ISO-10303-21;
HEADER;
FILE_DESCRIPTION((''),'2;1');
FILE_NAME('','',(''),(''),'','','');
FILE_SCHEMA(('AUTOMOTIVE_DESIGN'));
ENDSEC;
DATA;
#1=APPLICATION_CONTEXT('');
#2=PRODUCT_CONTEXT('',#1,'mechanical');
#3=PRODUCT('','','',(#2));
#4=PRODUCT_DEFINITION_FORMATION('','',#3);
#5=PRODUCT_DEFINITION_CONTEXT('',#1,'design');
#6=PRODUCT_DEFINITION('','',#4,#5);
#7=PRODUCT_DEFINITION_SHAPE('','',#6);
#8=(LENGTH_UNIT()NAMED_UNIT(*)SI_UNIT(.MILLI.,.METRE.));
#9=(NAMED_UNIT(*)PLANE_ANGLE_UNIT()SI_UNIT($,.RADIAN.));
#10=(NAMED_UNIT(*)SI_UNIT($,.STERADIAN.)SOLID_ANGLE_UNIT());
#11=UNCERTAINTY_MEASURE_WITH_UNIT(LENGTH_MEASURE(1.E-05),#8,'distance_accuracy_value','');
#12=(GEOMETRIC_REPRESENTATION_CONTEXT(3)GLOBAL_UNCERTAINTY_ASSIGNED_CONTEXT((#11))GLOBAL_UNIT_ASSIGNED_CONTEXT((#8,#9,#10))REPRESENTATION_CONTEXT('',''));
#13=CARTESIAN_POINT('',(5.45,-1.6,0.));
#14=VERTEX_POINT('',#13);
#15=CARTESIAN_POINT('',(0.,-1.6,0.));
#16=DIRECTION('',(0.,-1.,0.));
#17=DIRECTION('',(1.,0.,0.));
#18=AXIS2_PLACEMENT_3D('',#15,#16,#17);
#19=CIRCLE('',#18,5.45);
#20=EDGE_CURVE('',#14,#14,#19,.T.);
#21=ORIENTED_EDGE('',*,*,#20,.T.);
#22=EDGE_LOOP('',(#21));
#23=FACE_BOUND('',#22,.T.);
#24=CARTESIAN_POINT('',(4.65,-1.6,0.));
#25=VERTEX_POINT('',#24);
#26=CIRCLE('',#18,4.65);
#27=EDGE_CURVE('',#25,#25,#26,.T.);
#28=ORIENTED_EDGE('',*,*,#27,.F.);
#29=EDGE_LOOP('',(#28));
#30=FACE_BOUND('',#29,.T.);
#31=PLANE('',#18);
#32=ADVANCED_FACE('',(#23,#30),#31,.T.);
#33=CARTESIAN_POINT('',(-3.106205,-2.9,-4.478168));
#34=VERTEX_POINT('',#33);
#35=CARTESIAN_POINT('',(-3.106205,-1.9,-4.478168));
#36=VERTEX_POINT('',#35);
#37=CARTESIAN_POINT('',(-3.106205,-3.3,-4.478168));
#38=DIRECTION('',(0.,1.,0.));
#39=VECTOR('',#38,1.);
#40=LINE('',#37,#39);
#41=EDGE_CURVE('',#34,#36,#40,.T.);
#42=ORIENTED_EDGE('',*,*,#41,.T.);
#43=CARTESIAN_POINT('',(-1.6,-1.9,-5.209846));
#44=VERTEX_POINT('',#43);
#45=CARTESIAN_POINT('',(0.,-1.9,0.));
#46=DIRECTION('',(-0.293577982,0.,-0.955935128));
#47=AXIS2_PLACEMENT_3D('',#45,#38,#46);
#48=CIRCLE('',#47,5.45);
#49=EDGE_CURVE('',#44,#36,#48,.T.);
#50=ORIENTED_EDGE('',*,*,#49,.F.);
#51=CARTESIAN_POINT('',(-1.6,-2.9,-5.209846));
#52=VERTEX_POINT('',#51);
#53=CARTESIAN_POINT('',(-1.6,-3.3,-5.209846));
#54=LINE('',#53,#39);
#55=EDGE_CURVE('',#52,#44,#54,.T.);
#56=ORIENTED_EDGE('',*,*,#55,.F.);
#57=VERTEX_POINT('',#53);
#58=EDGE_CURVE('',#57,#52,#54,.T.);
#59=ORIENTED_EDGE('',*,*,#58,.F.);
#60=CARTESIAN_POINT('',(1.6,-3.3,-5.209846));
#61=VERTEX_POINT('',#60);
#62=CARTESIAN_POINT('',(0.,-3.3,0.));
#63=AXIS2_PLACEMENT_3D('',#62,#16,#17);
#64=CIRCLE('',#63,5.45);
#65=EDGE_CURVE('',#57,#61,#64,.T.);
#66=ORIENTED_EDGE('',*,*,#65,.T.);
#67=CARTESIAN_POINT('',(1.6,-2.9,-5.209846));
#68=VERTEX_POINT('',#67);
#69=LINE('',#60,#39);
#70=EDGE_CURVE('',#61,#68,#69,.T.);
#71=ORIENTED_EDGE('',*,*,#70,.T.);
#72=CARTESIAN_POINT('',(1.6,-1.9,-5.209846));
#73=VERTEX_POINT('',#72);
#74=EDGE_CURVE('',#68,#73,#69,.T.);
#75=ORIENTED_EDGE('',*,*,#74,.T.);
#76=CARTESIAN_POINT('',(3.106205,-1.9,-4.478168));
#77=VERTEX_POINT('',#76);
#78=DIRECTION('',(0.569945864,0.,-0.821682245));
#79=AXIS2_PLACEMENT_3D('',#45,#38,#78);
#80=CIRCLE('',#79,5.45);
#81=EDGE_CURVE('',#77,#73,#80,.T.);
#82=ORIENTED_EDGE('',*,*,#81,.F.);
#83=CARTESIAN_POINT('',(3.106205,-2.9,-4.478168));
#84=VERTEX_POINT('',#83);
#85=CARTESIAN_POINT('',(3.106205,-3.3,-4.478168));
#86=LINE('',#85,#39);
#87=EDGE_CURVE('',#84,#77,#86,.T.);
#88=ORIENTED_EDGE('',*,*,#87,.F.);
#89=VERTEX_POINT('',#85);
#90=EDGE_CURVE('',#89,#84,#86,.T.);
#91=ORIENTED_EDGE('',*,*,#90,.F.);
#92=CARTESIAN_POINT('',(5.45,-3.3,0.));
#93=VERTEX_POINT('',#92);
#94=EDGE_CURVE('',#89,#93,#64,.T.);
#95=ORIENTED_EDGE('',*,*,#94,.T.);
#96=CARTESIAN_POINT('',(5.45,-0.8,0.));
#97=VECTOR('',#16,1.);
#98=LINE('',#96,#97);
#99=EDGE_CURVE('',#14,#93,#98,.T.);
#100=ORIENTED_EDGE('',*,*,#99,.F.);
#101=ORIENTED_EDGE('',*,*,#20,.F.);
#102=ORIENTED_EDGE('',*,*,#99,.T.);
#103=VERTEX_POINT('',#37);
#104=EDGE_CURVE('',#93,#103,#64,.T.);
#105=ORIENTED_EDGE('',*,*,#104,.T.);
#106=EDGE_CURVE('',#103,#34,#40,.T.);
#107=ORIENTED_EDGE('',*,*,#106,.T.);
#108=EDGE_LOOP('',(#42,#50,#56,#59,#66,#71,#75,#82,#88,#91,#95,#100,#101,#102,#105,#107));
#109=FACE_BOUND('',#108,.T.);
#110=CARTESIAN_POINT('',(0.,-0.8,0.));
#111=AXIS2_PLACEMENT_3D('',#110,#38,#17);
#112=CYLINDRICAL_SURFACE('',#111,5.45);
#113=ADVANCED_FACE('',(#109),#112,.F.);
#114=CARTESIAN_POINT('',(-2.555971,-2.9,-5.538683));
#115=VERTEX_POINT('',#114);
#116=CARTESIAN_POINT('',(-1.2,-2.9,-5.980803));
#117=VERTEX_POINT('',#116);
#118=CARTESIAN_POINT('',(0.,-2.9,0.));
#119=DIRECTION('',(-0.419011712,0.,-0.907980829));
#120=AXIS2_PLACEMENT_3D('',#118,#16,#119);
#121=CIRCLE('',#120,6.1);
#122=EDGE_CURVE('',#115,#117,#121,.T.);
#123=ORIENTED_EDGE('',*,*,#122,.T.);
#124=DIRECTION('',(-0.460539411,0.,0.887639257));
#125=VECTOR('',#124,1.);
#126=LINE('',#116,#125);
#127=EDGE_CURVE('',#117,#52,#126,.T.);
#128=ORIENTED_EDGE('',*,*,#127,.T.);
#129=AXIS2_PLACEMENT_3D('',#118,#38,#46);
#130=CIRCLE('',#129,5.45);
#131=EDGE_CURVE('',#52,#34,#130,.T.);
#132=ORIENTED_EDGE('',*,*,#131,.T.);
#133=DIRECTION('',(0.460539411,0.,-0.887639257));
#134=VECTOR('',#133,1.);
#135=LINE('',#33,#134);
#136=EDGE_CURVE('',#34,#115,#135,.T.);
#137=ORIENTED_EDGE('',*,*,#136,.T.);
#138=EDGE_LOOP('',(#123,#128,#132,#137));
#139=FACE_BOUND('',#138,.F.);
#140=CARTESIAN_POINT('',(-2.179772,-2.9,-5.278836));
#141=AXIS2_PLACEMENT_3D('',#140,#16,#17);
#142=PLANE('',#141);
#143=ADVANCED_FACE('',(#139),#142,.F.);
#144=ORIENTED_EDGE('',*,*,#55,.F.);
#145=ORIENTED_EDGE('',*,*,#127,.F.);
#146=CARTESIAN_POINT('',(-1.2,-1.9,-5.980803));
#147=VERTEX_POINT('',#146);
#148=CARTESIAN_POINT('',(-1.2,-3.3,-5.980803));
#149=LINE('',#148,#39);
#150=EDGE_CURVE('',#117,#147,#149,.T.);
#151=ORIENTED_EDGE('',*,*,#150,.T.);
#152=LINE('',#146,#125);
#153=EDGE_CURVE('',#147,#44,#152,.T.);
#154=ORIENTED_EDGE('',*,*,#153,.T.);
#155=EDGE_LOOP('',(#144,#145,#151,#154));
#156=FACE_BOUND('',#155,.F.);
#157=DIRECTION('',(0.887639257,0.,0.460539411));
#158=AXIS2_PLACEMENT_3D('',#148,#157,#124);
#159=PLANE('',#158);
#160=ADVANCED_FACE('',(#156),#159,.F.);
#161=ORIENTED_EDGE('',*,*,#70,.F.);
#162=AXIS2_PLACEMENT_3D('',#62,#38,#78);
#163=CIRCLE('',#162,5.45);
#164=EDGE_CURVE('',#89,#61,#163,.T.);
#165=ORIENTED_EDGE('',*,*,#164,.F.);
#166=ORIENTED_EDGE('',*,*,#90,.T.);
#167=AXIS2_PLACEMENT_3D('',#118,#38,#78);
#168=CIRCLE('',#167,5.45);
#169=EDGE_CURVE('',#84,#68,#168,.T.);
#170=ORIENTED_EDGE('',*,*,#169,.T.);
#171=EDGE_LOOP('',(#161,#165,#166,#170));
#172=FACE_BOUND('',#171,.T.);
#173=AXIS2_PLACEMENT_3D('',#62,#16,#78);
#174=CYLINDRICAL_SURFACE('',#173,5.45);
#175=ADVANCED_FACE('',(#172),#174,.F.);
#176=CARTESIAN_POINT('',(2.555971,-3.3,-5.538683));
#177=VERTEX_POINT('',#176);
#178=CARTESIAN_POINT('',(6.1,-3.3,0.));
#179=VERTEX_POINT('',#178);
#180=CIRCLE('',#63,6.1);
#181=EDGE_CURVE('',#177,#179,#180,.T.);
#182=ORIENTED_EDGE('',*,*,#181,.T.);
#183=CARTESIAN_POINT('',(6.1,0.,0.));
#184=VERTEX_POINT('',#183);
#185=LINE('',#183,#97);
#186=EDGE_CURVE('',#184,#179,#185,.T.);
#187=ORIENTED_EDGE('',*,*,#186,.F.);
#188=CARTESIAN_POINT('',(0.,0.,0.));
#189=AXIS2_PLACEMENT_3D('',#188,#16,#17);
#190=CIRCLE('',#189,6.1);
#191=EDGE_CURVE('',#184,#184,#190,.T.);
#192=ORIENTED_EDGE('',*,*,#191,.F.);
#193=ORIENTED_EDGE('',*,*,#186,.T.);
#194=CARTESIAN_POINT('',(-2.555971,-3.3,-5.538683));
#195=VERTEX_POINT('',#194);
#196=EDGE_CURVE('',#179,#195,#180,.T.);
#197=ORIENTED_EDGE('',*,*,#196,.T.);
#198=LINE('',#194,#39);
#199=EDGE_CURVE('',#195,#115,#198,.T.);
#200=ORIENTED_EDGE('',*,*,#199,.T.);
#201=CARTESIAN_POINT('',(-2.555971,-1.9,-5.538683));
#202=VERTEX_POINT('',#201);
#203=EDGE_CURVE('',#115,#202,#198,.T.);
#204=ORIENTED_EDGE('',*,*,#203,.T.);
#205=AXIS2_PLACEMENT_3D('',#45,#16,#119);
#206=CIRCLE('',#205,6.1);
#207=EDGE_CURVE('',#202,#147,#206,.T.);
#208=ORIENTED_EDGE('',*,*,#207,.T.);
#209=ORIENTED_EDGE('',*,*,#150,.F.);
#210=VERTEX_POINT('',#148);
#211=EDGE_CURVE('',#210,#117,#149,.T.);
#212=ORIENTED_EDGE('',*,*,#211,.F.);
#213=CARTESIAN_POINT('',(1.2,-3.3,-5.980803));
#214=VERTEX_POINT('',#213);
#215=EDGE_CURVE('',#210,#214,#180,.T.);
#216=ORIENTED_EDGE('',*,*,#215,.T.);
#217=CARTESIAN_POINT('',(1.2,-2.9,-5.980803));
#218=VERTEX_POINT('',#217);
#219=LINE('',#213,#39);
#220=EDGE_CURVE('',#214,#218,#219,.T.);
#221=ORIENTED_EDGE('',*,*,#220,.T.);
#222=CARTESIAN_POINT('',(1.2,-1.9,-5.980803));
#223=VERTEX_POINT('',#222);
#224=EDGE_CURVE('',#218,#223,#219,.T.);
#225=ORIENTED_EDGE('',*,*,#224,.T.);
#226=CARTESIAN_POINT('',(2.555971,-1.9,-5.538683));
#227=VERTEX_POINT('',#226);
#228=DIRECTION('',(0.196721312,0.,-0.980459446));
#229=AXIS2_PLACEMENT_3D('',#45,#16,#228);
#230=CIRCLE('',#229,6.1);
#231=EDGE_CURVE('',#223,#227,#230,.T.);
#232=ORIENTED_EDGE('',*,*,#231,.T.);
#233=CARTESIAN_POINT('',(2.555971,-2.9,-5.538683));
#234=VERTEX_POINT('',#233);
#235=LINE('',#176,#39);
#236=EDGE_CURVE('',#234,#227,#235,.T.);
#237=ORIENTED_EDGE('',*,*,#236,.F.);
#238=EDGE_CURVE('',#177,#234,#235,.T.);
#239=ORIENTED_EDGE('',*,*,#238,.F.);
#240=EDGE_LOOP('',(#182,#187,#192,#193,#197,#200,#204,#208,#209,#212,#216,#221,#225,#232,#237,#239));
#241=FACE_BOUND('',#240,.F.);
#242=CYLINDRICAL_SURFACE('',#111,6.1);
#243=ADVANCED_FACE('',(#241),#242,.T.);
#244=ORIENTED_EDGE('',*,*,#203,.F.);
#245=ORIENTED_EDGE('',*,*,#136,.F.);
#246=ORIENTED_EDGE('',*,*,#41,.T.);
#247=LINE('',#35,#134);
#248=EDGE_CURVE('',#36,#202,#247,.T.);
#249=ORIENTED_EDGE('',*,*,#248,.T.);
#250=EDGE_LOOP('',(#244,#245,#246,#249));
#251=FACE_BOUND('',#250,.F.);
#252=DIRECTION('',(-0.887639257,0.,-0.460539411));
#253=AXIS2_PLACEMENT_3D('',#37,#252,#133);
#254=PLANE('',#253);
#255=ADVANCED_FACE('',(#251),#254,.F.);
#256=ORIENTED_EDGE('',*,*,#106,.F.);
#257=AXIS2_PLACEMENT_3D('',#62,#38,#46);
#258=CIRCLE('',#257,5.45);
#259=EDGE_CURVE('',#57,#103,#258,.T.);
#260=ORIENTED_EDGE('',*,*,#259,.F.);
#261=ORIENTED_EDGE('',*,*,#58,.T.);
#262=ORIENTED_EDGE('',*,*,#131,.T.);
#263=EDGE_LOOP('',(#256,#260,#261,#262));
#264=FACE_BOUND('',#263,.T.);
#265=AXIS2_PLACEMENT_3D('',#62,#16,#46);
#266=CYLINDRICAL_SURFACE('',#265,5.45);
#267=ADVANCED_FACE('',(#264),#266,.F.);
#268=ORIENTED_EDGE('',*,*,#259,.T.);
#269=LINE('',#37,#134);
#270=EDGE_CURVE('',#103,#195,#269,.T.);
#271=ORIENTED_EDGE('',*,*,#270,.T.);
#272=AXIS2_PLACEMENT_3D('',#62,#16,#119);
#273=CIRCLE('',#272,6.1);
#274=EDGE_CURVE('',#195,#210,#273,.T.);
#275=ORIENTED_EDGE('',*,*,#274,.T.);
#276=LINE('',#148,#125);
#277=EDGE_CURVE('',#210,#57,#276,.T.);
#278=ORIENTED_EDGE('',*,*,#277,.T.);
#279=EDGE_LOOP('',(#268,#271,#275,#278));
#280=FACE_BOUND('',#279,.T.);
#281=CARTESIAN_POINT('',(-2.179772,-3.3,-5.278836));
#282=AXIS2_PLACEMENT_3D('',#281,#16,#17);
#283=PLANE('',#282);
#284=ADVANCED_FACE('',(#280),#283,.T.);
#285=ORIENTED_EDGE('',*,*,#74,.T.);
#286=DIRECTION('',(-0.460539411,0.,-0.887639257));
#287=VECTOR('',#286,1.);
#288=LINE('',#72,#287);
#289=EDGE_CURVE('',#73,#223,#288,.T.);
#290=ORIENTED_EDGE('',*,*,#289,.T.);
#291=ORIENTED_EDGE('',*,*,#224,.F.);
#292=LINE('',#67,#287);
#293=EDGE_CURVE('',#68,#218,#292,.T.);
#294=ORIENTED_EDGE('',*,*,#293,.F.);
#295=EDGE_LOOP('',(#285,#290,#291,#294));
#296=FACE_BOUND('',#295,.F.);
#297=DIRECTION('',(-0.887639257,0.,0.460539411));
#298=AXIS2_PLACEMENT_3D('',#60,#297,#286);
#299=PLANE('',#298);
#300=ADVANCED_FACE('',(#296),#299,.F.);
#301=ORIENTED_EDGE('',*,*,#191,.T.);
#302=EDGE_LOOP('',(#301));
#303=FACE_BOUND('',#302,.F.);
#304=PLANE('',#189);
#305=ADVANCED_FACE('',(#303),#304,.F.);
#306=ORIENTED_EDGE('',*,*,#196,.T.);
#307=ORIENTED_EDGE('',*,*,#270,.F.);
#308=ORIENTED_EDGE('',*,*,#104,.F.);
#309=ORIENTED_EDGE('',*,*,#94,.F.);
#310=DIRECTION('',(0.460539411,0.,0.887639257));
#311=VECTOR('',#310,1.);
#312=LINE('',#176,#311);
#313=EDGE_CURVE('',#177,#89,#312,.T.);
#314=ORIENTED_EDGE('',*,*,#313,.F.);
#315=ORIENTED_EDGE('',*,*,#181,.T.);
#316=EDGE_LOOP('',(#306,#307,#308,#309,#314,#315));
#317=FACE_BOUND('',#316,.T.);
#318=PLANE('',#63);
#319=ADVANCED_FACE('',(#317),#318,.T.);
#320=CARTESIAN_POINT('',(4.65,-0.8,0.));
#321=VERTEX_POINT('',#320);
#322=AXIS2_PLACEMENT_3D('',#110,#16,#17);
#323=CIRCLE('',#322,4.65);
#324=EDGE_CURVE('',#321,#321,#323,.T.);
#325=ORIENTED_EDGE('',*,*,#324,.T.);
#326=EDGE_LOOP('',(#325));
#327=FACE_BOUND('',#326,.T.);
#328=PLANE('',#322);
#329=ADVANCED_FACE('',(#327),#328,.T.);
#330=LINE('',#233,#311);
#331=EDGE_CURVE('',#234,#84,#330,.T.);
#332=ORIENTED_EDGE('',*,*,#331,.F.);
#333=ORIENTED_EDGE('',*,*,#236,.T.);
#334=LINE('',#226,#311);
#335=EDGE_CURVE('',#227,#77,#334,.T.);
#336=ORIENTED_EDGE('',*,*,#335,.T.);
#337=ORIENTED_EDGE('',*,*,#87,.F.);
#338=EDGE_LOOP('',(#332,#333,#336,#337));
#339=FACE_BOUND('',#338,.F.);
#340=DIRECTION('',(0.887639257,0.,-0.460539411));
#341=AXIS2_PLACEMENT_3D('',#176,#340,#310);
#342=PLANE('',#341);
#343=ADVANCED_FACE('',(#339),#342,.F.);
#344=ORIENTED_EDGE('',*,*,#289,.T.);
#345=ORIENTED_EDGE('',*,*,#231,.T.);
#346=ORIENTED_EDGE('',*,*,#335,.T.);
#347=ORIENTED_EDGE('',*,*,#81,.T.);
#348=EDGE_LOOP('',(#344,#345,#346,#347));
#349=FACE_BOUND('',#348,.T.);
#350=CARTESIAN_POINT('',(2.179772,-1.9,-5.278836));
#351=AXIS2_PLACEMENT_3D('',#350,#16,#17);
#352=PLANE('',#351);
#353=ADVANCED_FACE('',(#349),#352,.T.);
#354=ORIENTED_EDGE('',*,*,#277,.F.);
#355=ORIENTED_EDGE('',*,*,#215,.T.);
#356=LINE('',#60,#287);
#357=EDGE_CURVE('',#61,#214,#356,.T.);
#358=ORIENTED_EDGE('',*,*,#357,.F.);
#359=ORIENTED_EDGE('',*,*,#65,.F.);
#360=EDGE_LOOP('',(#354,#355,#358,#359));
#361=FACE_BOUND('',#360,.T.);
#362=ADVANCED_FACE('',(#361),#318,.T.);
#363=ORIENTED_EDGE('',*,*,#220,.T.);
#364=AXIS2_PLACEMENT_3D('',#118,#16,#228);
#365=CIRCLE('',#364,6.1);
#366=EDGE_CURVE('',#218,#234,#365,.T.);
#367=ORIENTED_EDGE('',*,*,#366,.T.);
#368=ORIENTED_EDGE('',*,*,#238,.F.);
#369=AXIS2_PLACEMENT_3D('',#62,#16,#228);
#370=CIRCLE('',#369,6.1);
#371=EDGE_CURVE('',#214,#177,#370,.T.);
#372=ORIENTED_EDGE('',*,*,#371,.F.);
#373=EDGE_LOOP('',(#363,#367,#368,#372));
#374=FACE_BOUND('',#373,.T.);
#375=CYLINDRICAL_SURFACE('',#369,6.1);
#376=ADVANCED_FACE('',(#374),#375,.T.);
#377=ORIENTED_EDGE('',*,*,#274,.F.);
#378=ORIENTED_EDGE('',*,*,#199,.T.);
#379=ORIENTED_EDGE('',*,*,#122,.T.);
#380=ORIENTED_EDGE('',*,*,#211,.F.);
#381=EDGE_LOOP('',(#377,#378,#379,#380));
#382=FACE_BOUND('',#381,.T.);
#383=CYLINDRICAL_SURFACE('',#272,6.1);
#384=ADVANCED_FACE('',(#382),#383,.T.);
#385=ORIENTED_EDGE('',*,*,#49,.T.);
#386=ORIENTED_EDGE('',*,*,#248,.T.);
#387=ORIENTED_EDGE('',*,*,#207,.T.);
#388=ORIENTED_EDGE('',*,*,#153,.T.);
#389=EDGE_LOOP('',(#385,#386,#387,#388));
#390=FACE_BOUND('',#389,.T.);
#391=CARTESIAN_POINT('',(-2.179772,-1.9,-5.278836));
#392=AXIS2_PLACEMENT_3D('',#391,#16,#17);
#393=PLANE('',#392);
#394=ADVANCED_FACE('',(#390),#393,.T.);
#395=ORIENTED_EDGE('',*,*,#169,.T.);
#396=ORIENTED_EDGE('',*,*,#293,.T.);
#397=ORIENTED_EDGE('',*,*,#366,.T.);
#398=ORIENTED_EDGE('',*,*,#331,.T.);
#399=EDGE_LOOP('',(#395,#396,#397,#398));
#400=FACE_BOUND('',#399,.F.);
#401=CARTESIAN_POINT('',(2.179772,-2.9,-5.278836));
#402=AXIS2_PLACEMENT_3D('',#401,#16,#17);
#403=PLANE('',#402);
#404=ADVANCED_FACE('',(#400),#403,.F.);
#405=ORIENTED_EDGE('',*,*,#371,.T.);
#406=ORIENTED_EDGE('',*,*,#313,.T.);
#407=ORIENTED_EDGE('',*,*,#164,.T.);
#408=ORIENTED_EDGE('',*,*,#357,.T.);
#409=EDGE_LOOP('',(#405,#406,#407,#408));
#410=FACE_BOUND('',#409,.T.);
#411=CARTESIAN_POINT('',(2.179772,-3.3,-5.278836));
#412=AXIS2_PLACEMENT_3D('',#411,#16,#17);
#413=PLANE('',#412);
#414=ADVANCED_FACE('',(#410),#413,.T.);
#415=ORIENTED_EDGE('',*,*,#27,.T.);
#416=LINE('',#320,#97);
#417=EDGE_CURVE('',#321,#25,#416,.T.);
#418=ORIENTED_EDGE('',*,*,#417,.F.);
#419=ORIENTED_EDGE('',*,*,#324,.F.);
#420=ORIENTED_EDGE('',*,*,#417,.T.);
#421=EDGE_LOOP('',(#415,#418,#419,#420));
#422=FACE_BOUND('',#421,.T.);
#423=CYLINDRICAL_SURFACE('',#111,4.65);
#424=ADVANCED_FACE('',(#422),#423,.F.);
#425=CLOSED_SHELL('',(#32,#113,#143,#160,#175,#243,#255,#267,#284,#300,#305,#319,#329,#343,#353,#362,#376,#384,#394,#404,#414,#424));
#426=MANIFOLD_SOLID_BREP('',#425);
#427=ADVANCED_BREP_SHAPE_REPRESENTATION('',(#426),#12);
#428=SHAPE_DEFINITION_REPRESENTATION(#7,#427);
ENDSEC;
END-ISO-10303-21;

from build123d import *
from build123d import SkipClean  # not in build123d's __all__

# Parameters (mm, degrees)
F0_R     = 6.1
F0_R_2   = 5
F1_DEPTH = 0.8
F2_R     = 6.1
F2_R_2   = 5.45
F3_DEPTH = 2.5
F4_R     = 5.45
F4_R_2   = 4.65
F5_DEPTH = 0.8
F7_DEPTH = 1.4
F9_DEPTH = 0.4


with BuildPart() as f1:
    # F0 (on Front) → F1 (new body)
    with BuildSketch(Plane.XZ):
        Circle(F0_R)
        Circle(F0_R_2, mode=Mode.SUBTRACT)
        Circle(F0_R_2)
    extrude(amount=F1_DEPTH)

    # F2 (on face) → F3 (join)
    with BuildSketch(Plane.XZ.offset(0.8)):
        Circle(F2_R)
        Circle(F2_R_2, mode=Mode.SUBTRACT)
    extrude(amount=F3_DEPTH)

    # F4 (on face) → F5 (join)
    with BuildSketch(Plane.XZ.offset(0.8)):
        Circle(F4_R)
        Circle(F4_R_2, mode=Mode.SUBTRACT)
    extrude(amount=F5_DEPTH)

    # F6 (on face) → F7 (cut)
    with BuildSketch(Plane.XZ.offset(3.3)):
        with BuildLine():
            Line((-1.2, -5.9808026217), (-1.6, -5.2098464469))
            ThreePointArc((-1.6, -5.2098464469), (-2.3813713563, -4.9022005735), (-3.1062049616, -4.4781682345))
            Line((-3.1062049616, -4.4781682345), (-2.555971444, -5.5386830544))
            ThreePointArc((-2.555971444, -5.5386830544), (-1.8909515594, -5.7995087895), (-1.2, -5.9808026217))
        make_face()
        with BuildLine():
            ThreePointArc((3.1062049616, -4.4781682345), (2.3813713563, -4.9022005735), (1.6, -5.2098464469))
            Line((1.6, -5.2098464469), (1.2, -5.9808026217))
            ThreePointArc((1.2, -5.9808026217), (1.8909515594, -5.7995087895), (2.555971444, -5.5386830544))
            Line((2.555971444, -5.5386830544), (3.1062049616, -4.4781682345))
        make_face()
    extrude(amount=-F7_DEPTH, mode=Mode.SUBTRACT)

    # F8 (on face) → F9 (join)
    with BuildSketch(Plane.XZ.offset(3.3)):
        with BuildLine():
            ThreePointArc((-1.6, -5.2098464469), (-2.3813713563, -4.9022005735), (-3.1062049616, -4.4781682345))
            Line((-3.1062049616, -4.4781682345), (-2.555971444, -5.5386830544))
            ThreePointArc((-2.555971444, -5.5386830544), (-1.8909515594, -5.7995087895), (-1.2, -5.9808026217))
            Line((-1.2, -5.9808026217), (-1.6, -5.2098464469))
        make_face()
        with BuildLine():
            Line((2.555971444, -5.5386830544), (3.1062049616, -4.4781682345))
            ThreePointArc((3.1062049616, -4.4781682345), (2.3813713563, -4.9022005735), (1.6, -5.2098464469))
            Line((1.6, -5.2098464469), (1.2, -5.9808026217))
            ThreePointArc((1.2, -5.9808026217), (1.8909515594, -5.7995087895), (2.555971444, -5.5386830544))
        make_face()
    with SkipClean():  # cleaning this boolean's faces spoils the solid; the shape is the same uncleaned
        extrude(amount=-F9_DEPTH)


solid = f1.part
